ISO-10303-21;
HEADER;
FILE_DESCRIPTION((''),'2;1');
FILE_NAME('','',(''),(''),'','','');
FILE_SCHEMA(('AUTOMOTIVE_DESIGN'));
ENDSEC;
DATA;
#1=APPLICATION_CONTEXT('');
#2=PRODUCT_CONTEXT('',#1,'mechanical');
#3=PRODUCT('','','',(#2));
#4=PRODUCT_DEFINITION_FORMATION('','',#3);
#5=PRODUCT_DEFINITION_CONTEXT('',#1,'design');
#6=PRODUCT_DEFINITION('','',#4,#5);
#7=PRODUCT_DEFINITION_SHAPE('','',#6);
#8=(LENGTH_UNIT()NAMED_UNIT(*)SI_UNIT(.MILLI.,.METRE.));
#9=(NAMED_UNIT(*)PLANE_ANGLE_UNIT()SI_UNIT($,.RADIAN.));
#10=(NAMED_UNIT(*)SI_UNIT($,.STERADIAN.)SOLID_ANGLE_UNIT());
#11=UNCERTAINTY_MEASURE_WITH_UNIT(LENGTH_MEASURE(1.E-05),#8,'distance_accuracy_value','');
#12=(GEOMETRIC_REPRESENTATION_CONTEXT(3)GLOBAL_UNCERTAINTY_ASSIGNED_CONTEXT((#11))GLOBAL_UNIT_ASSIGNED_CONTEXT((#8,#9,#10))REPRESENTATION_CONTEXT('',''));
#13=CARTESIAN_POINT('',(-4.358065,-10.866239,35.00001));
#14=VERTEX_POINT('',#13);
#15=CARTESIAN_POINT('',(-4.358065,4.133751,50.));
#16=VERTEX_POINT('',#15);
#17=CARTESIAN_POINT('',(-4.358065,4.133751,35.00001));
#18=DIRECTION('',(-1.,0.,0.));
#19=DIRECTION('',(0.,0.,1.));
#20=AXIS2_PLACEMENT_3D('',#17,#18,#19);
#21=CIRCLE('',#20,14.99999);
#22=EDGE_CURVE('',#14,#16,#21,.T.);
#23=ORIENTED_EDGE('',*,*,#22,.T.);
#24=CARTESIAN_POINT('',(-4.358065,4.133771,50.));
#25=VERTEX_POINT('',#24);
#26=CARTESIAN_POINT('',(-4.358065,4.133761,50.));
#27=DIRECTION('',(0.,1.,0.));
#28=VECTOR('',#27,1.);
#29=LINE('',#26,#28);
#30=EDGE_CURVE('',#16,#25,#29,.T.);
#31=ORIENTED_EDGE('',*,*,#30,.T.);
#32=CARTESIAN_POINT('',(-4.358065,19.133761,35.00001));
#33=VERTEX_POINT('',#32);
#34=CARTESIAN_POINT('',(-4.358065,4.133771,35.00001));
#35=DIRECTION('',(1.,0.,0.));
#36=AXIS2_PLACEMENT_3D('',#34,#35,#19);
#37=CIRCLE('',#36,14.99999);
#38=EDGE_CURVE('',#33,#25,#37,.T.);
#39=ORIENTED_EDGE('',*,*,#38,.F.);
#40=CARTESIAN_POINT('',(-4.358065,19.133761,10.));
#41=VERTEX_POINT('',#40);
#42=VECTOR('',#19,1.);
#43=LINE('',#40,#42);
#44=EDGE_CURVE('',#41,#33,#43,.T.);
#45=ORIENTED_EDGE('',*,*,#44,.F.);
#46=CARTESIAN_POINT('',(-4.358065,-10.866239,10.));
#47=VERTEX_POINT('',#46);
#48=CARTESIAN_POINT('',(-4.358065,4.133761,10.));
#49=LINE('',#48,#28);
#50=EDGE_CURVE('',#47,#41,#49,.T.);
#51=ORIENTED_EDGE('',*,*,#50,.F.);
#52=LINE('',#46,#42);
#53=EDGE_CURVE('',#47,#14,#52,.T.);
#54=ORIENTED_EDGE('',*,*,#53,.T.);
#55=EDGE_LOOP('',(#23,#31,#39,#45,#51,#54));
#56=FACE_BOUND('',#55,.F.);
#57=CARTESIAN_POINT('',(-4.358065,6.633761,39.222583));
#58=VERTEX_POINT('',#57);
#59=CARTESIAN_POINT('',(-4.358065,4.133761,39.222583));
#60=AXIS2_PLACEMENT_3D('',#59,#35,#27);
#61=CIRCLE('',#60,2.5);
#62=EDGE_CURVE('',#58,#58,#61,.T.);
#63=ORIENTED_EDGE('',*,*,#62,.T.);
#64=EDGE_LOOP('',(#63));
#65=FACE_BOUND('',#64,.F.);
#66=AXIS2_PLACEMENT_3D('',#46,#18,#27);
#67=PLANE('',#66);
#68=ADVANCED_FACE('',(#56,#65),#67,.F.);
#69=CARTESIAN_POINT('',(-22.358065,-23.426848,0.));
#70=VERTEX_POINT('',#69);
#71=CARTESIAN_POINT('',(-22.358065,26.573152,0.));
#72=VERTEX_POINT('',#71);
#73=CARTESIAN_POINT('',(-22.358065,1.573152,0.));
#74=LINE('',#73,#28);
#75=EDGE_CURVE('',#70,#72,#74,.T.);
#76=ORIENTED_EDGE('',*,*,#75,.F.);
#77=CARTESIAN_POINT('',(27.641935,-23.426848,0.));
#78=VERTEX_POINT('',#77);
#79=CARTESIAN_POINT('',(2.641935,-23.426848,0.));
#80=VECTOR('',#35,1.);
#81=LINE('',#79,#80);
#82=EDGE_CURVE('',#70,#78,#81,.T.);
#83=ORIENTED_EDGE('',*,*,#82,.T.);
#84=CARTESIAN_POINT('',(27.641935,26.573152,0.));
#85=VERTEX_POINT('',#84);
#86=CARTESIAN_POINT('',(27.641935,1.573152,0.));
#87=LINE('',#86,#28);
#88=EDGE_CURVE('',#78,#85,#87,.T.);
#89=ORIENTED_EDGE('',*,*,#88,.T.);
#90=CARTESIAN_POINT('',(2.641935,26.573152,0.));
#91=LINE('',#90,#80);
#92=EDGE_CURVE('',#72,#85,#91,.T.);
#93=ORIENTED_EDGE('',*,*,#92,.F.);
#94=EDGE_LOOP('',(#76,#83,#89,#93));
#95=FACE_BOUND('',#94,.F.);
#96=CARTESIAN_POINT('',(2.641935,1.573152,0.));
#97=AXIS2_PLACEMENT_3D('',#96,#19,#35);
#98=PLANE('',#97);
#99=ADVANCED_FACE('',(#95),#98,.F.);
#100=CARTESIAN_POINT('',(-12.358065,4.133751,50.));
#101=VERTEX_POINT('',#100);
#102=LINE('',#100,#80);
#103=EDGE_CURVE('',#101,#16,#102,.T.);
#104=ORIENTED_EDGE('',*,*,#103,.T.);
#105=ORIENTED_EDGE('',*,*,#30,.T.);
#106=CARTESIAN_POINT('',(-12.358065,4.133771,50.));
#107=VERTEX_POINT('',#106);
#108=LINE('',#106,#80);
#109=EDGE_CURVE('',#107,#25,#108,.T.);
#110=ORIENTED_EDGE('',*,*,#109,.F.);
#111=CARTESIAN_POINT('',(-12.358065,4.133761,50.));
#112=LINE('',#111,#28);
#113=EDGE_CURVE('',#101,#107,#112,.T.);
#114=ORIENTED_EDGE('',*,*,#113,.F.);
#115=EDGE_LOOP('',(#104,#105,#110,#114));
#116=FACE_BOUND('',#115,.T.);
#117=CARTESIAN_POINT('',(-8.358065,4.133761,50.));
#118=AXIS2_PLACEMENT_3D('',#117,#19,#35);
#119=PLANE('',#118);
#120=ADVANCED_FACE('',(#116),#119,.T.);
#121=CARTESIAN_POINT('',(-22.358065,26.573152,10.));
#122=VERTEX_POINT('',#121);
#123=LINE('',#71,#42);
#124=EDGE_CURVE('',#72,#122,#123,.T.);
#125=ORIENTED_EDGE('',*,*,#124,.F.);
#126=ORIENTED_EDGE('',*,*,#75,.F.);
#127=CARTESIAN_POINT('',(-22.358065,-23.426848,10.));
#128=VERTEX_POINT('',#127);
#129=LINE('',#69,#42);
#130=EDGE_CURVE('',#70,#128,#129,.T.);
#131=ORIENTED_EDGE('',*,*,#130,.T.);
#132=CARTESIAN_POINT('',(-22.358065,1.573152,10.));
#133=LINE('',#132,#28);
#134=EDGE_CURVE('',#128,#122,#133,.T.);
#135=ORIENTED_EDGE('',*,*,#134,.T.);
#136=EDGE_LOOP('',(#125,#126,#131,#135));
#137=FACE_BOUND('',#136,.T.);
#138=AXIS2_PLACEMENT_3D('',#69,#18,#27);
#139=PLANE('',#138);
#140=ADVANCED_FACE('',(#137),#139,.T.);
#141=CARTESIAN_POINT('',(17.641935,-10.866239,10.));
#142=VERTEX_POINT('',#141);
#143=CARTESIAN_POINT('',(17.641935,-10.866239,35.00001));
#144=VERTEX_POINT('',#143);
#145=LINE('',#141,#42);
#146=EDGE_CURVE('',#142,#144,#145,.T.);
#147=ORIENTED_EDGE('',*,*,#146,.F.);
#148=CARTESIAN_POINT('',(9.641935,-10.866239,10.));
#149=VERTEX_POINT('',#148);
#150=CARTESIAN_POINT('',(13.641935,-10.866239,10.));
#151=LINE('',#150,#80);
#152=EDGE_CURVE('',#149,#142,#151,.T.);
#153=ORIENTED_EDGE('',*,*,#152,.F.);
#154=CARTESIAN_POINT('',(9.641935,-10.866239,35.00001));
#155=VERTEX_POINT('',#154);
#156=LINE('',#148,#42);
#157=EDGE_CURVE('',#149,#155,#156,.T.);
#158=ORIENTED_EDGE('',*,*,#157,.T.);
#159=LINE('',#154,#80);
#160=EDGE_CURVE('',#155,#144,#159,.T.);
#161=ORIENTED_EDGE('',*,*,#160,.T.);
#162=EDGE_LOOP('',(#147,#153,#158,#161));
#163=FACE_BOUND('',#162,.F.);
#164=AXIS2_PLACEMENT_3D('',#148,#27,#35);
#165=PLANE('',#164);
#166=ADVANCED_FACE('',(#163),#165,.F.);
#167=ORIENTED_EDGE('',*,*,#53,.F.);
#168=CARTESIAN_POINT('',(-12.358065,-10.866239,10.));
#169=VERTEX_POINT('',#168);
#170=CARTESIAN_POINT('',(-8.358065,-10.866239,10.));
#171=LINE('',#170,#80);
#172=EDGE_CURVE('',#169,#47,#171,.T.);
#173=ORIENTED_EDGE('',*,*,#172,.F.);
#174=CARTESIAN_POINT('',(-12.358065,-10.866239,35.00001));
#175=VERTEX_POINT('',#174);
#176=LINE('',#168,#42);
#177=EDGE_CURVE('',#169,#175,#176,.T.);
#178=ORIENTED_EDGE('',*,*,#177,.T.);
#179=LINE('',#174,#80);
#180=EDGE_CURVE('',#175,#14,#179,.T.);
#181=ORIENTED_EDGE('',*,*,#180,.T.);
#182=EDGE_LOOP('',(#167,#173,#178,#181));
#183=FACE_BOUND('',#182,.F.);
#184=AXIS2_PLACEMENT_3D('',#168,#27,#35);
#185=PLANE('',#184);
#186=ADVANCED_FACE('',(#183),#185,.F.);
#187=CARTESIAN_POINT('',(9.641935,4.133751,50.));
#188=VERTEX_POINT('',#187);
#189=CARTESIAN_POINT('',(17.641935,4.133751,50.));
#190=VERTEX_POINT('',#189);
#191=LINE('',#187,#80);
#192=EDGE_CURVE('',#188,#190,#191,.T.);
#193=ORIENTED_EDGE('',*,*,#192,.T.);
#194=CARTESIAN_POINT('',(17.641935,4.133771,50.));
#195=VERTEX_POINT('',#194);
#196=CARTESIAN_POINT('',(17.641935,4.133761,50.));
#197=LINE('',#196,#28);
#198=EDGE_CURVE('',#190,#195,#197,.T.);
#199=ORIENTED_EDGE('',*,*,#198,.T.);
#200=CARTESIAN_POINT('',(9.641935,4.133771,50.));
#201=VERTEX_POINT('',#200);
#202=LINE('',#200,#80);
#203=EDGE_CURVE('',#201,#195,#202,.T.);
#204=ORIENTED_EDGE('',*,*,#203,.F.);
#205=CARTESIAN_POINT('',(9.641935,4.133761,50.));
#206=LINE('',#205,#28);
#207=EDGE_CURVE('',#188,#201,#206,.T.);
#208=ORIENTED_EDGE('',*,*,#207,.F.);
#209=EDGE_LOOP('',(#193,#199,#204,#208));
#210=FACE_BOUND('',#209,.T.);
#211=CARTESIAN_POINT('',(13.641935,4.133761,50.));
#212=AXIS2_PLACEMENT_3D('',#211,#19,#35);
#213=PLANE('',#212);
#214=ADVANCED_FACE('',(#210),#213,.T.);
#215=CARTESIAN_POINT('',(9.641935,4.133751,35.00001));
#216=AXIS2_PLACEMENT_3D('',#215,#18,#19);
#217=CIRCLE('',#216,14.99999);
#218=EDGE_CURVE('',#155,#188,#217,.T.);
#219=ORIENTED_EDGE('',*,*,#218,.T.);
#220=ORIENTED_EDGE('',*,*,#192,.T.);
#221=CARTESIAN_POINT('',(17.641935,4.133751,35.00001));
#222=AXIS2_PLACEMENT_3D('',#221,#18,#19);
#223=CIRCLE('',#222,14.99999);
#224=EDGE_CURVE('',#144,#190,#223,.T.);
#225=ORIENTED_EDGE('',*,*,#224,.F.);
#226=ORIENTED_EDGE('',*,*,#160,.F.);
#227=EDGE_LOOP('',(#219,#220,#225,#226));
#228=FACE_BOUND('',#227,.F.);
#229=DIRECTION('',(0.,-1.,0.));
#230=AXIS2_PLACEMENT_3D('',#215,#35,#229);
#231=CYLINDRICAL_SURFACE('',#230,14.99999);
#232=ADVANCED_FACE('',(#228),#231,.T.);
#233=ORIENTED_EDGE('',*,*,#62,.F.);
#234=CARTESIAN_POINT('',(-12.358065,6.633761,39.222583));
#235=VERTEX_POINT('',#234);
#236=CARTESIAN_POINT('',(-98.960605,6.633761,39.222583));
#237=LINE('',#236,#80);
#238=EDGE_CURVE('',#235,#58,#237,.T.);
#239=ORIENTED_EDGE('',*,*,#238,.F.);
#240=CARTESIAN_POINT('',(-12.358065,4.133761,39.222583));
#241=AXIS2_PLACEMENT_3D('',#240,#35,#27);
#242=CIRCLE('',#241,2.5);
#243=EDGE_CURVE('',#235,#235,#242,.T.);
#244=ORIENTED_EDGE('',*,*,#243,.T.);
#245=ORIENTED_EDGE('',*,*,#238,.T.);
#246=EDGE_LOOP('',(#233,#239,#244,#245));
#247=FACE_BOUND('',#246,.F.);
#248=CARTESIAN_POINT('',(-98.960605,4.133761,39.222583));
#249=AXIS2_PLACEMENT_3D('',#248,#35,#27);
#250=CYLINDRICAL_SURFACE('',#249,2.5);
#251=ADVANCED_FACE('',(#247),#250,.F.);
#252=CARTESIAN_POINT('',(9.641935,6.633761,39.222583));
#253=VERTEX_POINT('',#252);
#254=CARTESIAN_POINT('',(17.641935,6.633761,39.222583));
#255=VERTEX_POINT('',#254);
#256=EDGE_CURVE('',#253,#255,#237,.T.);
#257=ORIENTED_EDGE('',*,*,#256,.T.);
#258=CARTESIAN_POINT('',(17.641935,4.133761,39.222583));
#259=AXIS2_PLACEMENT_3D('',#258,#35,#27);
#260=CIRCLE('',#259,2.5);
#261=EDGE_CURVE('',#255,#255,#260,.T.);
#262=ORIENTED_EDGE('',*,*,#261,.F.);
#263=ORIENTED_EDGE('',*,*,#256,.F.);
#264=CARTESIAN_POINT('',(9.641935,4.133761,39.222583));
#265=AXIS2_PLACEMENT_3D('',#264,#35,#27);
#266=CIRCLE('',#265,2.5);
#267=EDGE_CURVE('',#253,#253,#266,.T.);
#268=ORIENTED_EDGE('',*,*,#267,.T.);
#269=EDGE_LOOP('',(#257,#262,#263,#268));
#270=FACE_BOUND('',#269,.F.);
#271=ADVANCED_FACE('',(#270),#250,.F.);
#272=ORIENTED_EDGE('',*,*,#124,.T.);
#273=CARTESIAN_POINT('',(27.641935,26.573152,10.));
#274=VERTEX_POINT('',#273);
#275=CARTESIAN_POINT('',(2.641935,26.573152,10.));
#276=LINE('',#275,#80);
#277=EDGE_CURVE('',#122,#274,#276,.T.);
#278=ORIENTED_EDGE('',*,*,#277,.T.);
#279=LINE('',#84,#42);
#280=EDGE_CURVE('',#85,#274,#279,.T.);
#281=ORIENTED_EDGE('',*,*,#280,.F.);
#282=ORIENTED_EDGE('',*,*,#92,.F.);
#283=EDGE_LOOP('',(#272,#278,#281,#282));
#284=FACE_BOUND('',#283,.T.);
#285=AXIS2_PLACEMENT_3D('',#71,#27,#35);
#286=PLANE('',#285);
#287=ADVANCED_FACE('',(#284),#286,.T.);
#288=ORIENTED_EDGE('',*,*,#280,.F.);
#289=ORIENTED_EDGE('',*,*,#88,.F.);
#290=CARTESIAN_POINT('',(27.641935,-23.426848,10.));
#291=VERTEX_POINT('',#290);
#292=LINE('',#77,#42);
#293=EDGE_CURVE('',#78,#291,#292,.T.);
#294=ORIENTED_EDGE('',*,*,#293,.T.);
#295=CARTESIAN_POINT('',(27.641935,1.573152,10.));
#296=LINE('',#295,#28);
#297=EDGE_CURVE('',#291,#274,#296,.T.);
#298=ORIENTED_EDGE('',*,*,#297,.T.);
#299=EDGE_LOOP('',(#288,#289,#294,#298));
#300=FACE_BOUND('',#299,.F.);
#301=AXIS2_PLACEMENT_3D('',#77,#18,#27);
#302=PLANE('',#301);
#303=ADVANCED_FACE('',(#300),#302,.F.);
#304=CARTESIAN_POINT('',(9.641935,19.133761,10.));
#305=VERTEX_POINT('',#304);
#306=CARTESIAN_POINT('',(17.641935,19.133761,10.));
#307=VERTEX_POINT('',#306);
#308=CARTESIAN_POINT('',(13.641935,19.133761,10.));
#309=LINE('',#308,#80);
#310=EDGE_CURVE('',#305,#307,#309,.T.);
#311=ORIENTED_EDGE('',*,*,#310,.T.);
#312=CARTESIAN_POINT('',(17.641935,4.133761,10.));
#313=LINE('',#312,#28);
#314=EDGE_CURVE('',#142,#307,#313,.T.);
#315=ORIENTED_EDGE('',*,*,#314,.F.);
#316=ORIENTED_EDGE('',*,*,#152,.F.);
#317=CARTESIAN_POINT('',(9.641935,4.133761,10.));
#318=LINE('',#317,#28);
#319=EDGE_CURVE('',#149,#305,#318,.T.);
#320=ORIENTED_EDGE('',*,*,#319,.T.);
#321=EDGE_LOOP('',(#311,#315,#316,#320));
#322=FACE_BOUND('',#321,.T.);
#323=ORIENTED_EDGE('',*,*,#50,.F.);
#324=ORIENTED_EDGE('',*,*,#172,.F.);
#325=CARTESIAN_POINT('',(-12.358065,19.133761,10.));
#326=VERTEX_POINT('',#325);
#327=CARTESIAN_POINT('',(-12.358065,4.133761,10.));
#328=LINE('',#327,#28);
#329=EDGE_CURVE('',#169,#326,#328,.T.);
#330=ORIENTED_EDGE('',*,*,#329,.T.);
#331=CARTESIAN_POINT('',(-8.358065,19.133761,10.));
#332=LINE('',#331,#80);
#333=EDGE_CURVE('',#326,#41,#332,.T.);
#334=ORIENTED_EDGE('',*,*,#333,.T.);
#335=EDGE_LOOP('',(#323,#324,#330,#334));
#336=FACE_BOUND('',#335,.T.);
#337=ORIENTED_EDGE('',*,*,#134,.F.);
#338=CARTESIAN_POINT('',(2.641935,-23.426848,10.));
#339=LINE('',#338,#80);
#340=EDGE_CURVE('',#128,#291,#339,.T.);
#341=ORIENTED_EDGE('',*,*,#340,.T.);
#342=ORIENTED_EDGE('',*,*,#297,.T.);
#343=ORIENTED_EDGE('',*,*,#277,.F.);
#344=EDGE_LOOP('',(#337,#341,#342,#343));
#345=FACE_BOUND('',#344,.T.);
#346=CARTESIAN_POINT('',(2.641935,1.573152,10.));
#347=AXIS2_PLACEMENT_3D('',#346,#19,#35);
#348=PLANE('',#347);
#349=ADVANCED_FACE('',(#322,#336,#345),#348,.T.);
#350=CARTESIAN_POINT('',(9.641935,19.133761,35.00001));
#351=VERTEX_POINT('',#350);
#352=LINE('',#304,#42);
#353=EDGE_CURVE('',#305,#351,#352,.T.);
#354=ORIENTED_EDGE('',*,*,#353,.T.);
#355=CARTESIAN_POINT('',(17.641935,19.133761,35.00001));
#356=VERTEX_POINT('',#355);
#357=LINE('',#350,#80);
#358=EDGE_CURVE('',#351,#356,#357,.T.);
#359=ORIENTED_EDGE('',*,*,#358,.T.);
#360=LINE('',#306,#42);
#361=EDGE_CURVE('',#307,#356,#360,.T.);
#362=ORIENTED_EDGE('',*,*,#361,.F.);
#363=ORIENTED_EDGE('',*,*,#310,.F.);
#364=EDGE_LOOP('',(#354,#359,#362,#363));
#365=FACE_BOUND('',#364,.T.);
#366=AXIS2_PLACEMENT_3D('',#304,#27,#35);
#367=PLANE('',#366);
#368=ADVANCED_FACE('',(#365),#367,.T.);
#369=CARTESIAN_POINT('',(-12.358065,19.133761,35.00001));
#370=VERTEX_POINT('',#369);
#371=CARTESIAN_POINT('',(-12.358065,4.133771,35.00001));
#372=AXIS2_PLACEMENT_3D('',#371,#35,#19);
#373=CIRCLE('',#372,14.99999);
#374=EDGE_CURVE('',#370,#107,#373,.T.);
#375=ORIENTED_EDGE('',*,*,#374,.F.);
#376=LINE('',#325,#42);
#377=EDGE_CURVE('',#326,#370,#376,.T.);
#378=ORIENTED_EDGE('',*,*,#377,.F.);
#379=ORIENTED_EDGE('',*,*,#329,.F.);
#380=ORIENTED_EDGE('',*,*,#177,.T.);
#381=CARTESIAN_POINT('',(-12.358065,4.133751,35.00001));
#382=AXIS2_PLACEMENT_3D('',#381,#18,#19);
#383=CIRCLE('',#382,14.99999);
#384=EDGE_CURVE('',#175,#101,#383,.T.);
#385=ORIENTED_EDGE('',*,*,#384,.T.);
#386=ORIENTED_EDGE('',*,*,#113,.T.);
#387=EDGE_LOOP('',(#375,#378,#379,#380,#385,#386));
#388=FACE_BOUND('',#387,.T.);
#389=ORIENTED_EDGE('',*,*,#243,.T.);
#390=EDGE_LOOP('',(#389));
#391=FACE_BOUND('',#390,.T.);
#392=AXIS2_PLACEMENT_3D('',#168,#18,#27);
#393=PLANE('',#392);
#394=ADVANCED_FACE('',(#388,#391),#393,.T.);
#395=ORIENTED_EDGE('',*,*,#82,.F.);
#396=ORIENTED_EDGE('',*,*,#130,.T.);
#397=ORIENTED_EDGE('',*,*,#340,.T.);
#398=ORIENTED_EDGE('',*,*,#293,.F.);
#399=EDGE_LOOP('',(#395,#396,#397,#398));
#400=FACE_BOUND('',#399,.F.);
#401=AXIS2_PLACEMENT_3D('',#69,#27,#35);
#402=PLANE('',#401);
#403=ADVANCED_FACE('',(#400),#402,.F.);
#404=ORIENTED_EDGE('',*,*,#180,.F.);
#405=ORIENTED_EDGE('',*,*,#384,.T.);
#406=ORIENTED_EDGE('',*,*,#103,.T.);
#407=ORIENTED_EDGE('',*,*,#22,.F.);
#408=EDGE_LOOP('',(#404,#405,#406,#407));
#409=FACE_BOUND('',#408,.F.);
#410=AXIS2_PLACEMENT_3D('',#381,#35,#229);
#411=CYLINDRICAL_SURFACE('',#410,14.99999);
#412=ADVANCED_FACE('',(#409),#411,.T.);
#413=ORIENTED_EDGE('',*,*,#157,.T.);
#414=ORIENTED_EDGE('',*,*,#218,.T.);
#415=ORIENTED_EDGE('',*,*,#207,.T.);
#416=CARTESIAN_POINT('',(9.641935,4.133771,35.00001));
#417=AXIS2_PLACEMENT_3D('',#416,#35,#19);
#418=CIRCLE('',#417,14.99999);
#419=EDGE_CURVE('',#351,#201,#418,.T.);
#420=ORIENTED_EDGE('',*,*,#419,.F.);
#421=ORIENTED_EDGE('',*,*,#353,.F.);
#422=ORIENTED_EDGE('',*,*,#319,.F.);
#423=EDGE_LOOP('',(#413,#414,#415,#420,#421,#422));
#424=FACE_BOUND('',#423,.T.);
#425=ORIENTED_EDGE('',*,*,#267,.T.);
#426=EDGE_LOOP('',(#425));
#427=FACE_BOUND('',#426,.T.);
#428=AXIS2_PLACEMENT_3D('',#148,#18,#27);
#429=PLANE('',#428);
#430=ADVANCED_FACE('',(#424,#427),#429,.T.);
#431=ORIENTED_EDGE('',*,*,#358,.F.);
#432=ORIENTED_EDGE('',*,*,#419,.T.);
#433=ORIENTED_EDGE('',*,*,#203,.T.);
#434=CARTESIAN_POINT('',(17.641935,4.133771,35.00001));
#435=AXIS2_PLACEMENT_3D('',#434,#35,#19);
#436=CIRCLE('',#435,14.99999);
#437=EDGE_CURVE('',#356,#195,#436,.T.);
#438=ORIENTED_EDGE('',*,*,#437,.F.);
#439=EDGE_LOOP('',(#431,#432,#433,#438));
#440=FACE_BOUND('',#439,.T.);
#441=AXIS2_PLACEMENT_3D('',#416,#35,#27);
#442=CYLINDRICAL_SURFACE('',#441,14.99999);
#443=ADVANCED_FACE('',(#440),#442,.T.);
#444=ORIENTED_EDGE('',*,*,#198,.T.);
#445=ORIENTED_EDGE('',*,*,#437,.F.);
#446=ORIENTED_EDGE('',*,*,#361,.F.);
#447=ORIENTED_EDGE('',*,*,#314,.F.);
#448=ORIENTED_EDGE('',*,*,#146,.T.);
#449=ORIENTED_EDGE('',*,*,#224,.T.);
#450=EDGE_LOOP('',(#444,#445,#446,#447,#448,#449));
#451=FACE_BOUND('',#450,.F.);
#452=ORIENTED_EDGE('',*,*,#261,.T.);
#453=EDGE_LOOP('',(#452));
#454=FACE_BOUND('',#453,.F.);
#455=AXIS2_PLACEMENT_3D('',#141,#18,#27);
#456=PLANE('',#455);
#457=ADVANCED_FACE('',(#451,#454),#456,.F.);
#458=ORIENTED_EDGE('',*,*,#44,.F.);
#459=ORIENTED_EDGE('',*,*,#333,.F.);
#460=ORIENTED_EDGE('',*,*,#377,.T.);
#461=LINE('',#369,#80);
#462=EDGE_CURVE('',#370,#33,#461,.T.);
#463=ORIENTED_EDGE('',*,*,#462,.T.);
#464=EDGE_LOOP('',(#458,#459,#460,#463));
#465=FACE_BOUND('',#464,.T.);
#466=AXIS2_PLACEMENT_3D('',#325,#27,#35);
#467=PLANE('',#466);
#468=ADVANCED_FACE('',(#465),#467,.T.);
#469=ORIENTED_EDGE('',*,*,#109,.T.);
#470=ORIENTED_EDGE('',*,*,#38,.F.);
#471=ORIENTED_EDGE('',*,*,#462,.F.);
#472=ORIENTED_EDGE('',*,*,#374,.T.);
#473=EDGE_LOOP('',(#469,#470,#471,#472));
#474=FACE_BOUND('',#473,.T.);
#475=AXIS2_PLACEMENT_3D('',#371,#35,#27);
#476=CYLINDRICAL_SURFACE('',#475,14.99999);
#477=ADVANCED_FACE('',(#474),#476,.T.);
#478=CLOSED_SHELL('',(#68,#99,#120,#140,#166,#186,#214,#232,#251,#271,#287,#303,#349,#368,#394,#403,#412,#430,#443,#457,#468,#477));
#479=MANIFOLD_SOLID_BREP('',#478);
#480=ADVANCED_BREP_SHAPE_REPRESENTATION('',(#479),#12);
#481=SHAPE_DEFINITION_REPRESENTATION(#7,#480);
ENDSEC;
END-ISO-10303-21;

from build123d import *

# Parameters (mm, degrees)
F0_W     = 50
F0_H     = 50
F1_DEPTH = 10
F2_W     = 8
F2_H     = 30
F3_DEPTH = 40
F4_R     = 14.99999
F6_D     = 5


# Not quite as in the source:
# - a fillet or chamfer is up to 0.001 mm smaller than in the source, because OpenCascade refuses the exact size


with BuildPart() as f1:
    # F0 (on Top) → F1 (new body)
    with BuildSketch(Plane.XY):
        with Locations((2.6419349015, 1.5731524348)):
            Rectangle(F0_W, F0_H)
    extrude(amount=F1_DEPTH)

    # F2 (on face) → F3 (join)
    with BuildSketch(Plane.XY.offset(10)):
        with Locations((-8.3580650985, 4.1337611525)):
            Rectangle(F2_W, F2_H)
        with Locations((13.6419349015, 4.1337611525)):
            Rectangle(F2_W, F2_H)
    extrude(amount=F3_DEPTH)

    # F4 (radius 15 in the source; OpenCascade refuses exactly that, so slightly less here)
    f4_edges = [f1.edges().sort_by_distance(p)[0] for p in [
        (13.641935, -10.866239, 50),
        (13.641935, 19.133761, 50),
        (-8.358065, 19.133761, 50),
        (-8.358065, -10.866239, 50),
    ]]
    fillet(f4_edges, radius=F4_R)

    # F6 (through all)
    with Locations(Plane(origin=(-12.3580650985, 0, 0), x_dir=(0, -1, 0), z_dir=(-1, 0, 0))):
        with Locations((-4.1337611525, 39.2225831747)):
            Hole(F6_D / 2)


solid = f1.part
